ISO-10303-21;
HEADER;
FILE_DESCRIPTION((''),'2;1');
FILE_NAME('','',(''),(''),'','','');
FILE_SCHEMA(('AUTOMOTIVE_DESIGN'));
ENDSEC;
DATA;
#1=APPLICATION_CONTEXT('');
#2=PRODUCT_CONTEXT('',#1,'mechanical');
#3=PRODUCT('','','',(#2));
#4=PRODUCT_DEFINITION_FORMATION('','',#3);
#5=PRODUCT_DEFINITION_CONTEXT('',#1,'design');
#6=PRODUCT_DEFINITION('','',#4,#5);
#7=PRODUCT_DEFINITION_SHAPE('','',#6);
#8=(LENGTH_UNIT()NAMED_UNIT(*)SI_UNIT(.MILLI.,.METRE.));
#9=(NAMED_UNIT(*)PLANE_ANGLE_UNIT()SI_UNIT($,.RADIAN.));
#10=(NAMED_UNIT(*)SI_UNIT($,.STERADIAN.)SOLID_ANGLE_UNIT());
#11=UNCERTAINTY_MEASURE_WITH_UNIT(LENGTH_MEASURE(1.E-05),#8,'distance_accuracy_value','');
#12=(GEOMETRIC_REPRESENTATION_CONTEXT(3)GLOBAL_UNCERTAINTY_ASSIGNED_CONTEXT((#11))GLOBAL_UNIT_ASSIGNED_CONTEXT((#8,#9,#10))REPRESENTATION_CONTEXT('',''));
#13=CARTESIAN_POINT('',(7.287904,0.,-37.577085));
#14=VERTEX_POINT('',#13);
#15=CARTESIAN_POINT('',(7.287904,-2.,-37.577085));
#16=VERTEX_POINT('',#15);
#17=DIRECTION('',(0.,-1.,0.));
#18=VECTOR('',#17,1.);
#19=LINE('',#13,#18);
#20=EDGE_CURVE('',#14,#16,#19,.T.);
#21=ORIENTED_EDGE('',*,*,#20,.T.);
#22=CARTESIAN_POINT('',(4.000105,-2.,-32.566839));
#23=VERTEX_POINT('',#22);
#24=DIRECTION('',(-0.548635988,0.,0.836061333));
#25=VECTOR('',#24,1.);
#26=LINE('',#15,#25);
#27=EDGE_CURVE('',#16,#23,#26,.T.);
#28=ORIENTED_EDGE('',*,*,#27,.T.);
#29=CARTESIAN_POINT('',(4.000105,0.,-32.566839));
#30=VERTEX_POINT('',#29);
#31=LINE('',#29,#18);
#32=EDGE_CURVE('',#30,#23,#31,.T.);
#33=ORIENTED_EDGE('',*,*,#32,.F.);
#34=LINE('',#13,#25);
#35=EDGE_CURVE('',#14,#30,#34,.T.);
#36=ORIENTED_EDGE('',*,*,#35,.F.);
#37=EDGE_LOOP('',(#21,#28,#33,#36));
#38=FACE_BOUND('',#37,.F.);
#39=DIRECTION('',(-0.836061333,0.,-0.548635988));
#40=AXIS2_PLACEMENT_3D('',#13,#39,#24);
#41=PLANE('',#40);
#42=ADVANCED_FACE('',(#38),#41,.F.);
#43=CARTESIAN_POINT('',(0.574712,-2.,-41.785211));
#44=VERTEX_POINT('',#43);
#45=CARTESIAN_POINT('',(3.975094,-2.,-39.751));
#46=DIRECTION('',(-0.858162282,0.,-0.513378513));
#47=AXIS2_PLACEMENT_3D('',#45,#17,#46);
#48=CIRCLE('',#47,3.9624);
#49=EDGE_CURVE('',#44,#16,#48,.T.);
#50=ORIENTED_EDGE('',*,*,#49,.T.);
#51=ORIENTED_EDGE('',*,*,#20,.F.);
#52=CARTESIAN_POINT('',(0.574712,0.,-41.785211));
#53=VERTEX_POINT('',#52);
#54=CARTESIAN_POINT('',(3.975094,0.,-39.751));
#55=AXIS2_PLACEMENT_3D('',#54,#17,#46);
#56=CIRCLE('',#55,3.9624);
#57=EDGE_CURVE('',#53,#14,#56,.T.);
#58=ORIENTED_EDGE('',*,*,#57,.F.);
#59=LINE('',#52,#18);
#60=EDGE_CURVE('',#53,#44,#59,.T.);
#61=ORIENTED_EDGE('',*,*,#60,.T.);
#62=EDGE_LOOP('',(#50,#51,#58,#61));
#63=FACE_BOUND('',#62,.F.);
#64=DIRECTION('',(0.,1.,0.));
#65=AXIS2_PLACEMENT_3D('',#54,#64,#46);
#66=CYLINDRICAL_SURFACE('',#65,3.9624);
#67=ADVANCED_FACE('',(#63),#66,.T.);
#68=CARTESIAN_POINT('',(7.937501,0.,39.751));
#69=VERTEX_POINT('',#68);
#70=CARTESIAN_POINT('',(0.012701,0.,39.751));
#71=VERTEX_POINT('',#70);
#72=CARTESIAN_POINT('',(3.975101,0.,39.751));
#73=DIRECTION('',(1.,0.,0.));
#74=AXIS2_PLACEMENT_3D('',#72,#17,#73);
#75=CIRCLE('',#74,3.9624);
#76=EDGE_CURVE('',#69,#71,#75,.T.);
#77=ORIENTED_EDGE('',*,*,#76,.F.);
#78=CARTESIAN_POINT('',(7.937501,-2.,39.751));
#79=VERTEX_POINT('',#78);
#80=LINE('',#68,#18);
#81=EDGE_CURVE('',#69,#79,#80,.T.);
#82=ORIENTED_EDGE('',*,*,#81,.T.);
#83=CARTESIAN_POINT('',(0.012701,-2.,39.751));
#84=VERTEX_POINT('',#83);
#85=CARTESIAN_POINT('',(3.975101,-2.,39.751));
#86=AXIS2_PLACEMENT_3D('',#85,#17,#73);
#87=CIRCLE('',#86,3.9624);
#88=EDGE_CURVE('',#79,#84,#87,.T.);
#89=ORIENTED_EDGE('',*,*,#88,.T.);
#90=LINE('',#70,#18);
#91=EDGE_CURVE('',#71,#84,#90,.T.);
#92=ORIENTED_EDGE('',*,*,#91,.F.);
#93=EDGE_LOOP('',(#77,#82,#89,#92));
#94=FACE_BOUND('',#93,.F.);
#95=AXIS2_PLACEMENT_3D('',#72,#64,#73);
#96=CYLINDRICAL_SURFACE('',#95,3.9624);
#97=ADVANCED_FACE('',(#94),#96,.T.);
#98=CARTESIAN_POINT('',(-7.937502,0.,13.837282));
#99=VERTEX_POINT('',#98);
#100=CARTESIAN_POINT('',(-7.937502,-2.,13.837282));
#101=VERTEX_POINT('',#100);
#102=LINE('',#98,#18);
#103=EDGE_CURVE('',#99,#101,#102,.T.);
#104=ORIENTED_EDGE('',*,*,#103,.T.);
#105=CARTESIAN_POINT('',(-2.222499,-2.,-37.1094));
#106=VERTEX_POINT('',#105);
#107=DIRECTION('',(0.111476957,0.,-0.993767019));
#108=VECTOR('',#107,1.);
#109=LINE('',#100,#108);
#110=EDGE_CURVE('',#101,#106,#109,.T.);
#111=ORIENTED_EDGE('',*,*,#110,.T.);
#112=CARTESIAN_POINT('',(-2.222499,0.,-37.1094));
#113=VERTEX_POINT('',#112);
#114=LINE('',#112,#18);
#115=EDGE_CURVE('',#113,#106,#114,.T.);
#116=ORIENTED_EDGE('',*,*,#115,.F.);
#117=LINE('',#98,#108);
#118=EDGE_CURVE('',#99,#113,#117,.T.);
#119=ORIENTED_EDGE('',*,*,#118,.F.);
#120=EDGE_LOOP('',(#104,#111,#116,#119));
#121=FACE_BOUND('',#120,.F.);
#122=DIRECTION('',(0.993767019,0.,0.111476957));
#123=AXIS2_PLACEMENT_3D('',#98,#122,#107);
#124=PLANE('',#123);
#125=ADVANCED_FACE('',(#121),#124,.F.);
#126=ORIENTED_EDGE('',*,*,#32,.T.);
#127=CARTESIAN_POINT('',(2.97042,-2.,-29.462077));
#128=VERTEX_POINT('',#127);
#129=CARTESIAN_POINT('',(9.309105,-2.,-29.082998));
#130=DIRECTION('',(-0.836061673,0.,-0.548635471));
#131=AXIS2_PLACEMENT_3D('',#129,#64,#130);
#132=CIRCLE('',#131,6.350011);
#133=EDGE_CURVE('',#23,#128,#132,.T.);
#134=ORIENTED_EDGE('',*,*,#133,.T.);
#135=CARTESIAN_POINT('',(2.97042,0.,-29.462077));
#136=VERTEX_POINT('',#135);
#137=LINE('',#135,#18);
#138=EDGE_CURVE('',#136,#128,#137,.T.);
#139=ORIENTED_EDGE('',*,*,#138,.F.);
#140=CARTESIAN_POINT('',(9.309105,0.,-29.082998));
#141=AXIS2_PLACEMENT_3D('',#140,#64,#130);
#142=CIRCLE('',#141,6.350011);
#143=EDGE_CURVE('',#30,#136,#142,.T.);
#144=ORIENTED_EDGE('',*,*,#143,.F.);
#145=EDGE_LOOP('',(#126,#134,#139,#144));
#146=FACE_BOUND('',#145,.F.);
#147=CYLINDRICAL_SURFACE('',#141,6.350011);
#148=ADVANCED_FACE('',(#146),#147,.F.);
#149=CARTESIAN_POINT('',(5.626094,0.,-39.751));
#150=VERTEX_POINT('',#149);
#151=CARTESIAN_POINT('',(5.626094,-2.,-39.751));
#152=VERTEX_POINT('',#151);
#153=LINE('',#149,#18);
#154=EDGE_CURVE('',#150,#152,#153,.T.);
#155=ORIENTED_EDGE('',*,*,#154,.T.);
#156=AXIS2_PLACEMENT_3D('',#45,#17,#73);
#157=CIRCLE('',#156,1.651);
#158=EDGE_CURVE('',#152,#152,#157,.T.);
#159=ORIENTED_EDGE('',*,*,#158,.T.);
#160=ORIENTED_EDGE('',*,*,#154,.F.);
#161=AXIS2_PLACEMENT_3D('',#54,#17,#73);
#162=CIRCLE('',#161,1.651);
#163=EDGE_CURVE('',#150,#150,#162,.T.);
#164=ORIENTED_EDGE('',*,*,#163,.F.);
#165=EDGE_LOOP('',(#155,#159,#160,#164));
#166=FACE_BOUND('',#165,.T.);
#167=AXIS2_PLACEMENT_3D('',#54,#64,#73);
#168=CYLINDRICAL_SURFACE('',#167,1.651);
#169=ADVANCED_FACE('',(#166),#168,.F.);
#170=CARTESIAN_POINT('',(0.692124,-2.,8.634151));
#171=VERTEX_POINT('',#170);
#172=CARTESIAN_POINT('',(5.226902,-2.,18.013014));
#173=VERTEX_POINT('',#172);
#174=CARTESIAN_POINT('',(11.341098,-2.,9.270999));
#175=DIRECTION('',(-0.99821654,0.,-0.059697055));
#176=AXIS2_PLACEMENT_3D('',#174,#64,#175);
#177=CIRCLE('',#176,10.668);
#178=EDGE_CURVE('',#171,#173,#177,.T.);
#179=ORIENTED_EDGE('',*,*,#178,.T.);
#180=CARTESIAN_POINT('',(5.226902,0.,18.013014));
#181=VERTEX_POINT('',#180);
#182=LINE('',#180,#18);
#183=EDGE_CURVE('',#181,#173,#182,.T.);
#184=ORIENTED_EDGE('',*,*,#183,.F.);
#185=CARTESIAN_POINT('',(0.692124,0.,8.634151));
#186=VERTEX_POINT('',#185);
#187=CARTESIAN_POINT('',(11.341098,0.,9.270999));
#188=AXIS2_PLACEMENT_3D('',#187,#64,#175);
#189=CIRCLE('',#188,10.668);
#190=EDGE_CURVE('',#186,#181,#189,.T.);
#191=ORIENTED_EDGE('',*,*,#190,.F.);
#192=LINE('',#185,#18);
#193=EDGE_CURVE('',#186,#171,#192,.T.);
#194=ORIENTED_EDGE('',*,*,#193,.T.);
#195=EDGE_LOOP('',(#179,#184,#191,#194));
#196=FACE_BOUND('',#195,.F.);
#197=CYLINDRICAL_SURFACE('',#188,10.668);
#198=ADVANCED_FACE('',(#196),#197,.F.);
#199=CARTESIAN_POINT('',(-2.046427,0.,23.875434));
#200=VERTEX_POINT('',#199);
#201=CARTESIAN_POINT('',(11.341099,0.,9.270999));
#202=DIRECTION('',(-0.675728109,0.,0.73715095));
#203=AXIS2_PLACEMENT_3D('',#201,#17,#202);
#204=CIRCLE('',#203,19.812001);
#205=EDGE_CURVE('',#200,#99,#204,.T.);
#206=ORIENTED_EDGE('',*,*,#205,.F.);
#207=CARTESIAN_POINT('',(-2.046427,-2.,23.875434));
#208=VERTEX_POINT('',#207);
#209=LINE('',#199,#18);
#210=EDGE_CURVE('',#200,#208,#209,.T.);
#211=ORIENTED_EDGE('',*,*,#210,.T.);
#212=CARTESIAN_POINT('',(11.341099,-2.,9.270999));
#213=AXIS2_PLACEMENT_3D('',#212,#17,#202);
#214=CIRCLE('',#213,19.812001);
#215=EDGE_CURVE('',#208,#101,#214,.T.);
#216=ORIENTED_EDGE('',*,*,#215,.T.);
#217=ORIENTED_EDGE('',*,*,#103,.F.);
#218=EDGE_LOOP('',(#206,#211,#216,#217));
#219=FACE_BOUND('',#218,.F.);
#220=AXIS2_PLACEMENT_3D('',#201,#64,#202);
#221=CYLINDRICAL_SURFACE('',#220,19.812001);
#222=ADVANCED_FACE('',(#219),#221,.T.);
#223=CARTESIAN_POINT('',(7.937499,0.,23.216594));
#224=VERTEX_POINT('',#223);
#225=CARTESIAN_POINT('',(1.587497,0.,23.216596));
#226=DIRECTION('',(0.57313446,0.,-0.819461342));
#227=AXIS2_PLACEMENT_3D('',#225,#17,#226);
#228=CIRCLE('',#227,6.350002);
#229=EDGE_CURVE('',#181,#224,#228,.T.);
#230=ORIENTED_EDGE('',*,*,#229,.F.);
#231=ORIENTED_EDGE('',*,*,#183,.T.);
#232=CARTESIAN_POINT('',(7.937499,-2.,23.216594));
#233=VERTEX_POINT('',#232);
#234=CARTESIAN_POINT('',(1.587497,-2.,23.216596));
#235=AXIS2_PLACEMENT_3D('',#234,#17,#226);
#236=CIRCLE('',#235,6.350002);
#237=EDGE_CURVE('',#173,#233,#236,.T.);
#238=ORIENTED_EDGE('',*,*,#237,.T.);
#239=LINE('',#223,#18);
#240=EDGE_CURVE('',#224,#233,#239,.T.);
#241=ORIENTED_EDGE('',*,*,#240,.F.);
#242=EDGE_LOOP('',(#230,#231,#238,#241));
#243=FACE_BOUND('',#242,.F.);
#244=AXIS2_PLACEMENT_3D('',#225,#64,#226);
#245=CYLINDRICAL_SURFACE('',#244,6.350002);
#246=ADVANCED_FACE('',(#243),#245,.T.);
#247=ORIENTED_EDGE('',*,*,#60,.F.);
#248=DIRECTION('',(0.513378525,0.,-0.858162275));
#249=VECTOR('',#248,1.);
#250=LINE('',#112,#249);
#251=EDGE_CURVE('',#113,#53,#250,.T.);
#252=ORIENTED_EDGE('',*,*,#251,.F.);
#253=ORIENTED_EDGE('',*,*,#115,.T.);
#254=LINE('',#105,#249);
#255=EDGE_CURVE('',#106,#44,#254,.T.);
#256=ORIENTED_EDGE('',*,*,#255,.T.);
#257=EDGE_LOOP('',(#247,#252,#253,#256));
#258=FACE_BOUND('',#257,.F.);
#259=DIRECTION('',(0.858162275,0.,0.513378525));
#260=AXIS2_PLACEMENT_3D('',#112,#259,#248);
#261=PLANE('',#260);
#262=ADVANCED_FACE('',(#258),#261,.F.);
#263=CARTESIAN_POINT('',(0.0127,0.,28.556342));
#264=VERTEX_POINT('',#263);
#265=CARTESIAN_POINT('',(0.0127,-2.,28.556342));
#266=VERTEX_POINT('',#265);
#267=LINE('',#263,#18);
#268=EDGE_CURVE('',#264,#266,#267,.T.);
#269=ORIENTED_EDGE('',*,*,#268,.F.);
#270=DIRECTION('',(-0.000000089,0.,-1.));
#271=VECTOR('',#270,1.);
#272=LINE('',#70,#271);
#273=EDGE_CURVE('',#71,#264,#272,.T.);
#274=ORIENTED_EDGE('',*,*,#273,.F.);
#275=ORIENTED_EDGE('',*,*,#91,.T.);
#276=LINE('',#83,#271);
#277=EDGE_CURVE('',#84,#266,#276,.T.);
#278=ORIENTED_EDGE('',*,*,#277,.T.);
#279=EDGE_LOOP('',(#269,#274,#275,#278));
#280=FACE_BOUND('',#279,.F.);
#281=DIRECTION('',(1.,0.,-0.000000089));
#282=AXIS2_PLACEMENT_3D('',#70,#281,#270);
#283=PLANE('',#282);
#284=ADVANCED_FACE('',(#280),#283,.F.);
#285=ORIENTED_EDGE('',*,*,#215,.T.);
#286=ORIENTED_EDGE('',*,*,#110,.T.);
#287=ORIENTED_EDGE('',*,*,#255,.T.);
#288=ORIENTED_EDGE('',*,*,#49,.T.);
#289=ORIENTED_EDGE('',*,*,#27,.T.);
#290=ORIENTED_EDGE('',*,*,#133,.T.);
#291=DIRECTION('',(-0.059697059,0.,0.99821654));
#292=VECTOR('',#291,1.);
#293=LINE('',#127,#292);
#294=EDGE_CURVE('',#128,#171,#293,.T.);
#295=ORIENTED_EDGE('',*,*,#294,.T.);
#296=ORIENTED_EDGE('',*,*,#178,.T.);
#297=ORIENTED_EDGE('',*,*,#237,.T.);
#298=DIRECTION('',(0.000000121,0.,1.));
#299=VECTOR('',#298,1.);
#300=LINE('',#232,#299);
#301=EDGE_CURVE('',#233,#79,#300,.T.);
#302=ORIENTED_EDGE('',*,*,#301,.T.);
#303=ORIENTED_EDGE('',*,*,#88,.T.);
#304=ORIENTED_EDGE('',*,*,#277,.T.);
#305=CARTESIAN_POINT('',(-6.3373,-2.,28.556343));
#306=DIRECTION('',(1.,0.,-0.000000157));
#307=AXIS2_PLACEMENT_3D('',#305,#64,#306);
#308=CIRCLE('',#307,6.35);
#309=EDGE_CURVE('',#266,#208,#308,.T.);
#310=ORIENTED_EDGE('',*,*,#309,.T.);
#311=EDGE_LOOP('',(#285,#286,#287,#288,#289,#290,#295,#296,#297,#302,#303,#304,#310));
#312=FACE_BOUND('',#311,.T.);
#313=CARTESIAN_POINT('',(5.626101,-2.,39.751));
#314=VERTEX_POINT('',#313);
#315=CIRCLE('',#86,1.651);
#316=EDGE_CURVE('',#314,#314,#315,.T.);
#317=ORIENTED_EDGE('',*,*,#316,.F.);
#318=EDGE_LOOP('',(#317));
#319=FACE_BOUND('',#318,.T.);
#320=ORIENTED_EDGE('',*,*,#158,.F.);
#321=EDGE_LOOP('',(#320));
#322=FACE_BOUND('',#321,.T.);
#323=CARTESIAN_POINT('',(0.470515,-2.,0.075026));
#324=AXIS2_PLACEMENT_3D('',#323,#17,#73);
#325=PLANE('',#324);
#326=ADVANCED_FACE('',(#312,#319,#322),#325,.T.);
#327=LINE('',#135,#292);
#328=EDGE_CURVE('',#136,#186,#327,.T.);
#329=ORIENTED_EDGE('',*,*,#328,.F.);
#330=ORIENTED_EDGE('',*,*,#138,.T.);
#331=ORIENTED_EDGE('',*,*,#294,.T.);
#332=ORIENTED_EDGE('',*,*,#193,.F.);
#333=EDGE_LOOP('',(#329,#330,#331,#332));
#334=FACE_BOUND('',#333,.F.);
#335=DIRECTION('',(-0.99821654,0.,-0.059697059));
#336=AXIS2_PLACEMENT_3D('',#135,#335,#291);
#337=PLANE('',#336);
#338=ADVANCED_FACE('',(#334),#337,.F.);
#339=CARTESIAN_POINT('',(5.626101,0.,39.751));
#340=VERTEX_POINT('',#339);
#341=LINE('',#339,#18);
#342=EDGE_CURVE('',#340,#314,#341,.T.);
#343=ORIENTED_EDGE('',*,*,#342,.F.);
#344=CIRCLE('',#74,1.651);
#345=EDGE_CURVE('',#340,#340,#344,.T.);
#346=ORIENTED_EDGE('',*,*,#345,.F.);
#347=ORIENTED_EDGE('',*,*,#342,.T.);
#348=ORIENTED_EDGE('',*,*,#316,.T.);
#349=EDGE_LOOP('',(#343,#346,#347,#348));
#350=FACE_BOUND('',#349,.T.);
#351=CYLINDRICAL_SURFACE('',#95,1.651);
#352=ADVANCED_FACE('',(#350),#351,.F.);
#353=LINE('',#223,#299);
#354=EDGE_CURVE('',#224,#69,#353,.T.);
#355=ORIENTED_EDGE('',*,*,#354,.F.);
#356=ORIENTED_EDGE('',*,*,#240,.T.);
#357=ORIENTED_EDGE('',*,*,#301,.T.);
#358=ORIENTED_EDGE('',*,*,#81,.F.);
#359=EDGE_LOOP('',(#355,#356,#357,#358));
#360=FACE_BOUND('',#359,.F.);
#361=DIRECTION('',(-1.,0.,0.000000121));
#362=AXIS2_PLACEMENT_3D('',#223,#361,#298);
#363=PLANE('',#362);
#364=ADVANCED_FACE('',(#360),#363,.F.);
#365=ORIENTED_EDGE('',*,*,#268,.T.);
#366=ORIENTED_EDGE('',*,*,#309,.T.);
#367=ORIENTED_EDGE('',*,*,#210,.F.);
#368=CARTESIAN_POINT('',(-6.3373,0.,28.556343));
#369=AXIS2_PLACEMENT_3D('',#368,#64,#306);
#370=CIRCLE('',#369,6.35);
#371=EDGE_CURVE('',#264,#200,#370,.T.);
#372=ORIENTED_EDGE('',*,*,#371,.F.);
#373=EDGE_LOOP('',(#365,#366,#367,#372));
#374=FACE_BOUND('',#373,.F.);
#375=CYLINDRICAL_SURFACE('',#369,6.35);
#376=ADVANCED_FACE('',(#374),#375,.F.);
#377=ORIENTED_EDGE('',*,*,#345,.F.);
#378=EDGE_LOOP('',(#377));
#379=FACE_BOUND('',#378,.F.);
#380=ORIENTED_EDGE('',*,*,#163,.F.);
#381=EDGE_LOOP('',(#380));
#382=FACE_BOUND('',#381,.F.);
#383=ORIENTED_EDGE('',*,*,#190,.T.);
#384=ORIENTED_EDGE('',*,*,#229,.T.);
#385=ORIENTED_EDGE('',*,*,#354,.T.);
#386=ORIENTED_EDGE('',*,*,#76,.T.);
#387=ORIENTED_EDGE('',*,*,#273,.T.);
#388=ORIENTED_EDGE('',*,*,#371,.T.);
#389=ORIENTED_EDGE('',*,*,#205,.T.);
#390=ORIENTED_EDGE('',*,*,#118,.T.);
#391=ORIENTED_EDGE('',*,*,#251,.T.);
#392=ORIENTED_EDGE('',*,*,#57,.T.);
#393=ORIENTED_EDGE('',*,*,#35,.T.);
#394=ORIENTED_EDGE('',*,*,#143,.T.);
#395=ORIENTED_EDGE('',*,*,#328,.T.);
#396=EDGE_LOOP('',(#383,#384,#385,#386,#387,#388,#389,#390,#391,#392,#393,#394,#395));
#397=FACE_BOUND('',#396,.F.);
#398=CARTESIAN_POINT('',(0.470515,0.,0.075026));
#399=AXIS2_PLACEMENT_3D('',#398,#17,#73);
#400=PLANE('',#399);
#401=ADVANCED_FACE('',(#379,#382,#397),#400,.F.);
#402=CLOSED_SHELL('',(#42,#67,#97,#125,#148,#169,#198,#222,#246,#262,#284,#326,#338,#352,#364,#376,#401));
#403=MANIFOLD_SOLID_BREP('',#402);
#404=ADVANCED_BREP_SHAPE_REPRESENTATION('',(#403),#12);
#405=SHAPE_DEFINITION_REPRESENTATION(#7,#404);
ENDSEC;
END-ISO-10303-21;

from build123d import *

# Parameters (mm, degrees)
F0_R     = 1.651
F1_DEPTH = 2


# Not quite as in the source:
# - ends of sketch curves that miss each other by under 0.0002 mm in the source are joined


with BuildPart() as f1:
    # F0 (on Front) → F1 (new body)
    with BuildSketch(Plane.XZ):
        with BuildLine():
            Line((7.937499, 23.216594), (7.937501, 39.751))
            ThreePointArc((7.937501, 39.751), (3.975101, 43.7134), (0.012701, 39.751))
            Line((0.012701, 39.751), (0.0127, 28.556342))
            ThreePointArc((0.0127, 28.556342), (-0.524833277, 25.999444372), (-2.046427009, 23.8754340098))
            ThreePointArc((-2.046427009, 23.8754340098), (-5.7457403837, 19.2987254647), (-7.9375015933, 13.8372821405))
            Line((-7.9375015933, 13.8372821405), (-2.222499, -37.1094))
            Line((-2.222499, -37.1094), (0.574712, -41.785211))
            ThreePointArc((0.574712, -41.785211), (6.0796125104, -43.1083226832), (7.2879037085, -37.5770851913))
            Line((7.2879037085, -37.5770851913), (4.000105, -32.566839))
            ThreePointArc((4.000105, -32.566839), (3.2819142622, -31.0818977846), (2.97042001, -29.4620769994))
            Line((2.97042001, -29.4620769994), (0.692124, 8.634151))
            ThreePointArc((0.692124, 8.634151), (1.7368417824, 13.9147568002), (5.2269018653, 18.0130141926))
            ThreePointArc((5.2269018653, 18.0130141926), (7.2192261395, 20.2829710591), (7.937499, 23.216594))
        make_face()
        with Locations((3.975094, -39.751)):
            Circle(F0_R, mode=Mode.SUBTRACT)
        with Locations((3.975101, 39.751)):
            Circle(F0_R, mode=Mode.SUBTRACT)
    extrude(amount=F1_DEPTH)


solid = f1.part
